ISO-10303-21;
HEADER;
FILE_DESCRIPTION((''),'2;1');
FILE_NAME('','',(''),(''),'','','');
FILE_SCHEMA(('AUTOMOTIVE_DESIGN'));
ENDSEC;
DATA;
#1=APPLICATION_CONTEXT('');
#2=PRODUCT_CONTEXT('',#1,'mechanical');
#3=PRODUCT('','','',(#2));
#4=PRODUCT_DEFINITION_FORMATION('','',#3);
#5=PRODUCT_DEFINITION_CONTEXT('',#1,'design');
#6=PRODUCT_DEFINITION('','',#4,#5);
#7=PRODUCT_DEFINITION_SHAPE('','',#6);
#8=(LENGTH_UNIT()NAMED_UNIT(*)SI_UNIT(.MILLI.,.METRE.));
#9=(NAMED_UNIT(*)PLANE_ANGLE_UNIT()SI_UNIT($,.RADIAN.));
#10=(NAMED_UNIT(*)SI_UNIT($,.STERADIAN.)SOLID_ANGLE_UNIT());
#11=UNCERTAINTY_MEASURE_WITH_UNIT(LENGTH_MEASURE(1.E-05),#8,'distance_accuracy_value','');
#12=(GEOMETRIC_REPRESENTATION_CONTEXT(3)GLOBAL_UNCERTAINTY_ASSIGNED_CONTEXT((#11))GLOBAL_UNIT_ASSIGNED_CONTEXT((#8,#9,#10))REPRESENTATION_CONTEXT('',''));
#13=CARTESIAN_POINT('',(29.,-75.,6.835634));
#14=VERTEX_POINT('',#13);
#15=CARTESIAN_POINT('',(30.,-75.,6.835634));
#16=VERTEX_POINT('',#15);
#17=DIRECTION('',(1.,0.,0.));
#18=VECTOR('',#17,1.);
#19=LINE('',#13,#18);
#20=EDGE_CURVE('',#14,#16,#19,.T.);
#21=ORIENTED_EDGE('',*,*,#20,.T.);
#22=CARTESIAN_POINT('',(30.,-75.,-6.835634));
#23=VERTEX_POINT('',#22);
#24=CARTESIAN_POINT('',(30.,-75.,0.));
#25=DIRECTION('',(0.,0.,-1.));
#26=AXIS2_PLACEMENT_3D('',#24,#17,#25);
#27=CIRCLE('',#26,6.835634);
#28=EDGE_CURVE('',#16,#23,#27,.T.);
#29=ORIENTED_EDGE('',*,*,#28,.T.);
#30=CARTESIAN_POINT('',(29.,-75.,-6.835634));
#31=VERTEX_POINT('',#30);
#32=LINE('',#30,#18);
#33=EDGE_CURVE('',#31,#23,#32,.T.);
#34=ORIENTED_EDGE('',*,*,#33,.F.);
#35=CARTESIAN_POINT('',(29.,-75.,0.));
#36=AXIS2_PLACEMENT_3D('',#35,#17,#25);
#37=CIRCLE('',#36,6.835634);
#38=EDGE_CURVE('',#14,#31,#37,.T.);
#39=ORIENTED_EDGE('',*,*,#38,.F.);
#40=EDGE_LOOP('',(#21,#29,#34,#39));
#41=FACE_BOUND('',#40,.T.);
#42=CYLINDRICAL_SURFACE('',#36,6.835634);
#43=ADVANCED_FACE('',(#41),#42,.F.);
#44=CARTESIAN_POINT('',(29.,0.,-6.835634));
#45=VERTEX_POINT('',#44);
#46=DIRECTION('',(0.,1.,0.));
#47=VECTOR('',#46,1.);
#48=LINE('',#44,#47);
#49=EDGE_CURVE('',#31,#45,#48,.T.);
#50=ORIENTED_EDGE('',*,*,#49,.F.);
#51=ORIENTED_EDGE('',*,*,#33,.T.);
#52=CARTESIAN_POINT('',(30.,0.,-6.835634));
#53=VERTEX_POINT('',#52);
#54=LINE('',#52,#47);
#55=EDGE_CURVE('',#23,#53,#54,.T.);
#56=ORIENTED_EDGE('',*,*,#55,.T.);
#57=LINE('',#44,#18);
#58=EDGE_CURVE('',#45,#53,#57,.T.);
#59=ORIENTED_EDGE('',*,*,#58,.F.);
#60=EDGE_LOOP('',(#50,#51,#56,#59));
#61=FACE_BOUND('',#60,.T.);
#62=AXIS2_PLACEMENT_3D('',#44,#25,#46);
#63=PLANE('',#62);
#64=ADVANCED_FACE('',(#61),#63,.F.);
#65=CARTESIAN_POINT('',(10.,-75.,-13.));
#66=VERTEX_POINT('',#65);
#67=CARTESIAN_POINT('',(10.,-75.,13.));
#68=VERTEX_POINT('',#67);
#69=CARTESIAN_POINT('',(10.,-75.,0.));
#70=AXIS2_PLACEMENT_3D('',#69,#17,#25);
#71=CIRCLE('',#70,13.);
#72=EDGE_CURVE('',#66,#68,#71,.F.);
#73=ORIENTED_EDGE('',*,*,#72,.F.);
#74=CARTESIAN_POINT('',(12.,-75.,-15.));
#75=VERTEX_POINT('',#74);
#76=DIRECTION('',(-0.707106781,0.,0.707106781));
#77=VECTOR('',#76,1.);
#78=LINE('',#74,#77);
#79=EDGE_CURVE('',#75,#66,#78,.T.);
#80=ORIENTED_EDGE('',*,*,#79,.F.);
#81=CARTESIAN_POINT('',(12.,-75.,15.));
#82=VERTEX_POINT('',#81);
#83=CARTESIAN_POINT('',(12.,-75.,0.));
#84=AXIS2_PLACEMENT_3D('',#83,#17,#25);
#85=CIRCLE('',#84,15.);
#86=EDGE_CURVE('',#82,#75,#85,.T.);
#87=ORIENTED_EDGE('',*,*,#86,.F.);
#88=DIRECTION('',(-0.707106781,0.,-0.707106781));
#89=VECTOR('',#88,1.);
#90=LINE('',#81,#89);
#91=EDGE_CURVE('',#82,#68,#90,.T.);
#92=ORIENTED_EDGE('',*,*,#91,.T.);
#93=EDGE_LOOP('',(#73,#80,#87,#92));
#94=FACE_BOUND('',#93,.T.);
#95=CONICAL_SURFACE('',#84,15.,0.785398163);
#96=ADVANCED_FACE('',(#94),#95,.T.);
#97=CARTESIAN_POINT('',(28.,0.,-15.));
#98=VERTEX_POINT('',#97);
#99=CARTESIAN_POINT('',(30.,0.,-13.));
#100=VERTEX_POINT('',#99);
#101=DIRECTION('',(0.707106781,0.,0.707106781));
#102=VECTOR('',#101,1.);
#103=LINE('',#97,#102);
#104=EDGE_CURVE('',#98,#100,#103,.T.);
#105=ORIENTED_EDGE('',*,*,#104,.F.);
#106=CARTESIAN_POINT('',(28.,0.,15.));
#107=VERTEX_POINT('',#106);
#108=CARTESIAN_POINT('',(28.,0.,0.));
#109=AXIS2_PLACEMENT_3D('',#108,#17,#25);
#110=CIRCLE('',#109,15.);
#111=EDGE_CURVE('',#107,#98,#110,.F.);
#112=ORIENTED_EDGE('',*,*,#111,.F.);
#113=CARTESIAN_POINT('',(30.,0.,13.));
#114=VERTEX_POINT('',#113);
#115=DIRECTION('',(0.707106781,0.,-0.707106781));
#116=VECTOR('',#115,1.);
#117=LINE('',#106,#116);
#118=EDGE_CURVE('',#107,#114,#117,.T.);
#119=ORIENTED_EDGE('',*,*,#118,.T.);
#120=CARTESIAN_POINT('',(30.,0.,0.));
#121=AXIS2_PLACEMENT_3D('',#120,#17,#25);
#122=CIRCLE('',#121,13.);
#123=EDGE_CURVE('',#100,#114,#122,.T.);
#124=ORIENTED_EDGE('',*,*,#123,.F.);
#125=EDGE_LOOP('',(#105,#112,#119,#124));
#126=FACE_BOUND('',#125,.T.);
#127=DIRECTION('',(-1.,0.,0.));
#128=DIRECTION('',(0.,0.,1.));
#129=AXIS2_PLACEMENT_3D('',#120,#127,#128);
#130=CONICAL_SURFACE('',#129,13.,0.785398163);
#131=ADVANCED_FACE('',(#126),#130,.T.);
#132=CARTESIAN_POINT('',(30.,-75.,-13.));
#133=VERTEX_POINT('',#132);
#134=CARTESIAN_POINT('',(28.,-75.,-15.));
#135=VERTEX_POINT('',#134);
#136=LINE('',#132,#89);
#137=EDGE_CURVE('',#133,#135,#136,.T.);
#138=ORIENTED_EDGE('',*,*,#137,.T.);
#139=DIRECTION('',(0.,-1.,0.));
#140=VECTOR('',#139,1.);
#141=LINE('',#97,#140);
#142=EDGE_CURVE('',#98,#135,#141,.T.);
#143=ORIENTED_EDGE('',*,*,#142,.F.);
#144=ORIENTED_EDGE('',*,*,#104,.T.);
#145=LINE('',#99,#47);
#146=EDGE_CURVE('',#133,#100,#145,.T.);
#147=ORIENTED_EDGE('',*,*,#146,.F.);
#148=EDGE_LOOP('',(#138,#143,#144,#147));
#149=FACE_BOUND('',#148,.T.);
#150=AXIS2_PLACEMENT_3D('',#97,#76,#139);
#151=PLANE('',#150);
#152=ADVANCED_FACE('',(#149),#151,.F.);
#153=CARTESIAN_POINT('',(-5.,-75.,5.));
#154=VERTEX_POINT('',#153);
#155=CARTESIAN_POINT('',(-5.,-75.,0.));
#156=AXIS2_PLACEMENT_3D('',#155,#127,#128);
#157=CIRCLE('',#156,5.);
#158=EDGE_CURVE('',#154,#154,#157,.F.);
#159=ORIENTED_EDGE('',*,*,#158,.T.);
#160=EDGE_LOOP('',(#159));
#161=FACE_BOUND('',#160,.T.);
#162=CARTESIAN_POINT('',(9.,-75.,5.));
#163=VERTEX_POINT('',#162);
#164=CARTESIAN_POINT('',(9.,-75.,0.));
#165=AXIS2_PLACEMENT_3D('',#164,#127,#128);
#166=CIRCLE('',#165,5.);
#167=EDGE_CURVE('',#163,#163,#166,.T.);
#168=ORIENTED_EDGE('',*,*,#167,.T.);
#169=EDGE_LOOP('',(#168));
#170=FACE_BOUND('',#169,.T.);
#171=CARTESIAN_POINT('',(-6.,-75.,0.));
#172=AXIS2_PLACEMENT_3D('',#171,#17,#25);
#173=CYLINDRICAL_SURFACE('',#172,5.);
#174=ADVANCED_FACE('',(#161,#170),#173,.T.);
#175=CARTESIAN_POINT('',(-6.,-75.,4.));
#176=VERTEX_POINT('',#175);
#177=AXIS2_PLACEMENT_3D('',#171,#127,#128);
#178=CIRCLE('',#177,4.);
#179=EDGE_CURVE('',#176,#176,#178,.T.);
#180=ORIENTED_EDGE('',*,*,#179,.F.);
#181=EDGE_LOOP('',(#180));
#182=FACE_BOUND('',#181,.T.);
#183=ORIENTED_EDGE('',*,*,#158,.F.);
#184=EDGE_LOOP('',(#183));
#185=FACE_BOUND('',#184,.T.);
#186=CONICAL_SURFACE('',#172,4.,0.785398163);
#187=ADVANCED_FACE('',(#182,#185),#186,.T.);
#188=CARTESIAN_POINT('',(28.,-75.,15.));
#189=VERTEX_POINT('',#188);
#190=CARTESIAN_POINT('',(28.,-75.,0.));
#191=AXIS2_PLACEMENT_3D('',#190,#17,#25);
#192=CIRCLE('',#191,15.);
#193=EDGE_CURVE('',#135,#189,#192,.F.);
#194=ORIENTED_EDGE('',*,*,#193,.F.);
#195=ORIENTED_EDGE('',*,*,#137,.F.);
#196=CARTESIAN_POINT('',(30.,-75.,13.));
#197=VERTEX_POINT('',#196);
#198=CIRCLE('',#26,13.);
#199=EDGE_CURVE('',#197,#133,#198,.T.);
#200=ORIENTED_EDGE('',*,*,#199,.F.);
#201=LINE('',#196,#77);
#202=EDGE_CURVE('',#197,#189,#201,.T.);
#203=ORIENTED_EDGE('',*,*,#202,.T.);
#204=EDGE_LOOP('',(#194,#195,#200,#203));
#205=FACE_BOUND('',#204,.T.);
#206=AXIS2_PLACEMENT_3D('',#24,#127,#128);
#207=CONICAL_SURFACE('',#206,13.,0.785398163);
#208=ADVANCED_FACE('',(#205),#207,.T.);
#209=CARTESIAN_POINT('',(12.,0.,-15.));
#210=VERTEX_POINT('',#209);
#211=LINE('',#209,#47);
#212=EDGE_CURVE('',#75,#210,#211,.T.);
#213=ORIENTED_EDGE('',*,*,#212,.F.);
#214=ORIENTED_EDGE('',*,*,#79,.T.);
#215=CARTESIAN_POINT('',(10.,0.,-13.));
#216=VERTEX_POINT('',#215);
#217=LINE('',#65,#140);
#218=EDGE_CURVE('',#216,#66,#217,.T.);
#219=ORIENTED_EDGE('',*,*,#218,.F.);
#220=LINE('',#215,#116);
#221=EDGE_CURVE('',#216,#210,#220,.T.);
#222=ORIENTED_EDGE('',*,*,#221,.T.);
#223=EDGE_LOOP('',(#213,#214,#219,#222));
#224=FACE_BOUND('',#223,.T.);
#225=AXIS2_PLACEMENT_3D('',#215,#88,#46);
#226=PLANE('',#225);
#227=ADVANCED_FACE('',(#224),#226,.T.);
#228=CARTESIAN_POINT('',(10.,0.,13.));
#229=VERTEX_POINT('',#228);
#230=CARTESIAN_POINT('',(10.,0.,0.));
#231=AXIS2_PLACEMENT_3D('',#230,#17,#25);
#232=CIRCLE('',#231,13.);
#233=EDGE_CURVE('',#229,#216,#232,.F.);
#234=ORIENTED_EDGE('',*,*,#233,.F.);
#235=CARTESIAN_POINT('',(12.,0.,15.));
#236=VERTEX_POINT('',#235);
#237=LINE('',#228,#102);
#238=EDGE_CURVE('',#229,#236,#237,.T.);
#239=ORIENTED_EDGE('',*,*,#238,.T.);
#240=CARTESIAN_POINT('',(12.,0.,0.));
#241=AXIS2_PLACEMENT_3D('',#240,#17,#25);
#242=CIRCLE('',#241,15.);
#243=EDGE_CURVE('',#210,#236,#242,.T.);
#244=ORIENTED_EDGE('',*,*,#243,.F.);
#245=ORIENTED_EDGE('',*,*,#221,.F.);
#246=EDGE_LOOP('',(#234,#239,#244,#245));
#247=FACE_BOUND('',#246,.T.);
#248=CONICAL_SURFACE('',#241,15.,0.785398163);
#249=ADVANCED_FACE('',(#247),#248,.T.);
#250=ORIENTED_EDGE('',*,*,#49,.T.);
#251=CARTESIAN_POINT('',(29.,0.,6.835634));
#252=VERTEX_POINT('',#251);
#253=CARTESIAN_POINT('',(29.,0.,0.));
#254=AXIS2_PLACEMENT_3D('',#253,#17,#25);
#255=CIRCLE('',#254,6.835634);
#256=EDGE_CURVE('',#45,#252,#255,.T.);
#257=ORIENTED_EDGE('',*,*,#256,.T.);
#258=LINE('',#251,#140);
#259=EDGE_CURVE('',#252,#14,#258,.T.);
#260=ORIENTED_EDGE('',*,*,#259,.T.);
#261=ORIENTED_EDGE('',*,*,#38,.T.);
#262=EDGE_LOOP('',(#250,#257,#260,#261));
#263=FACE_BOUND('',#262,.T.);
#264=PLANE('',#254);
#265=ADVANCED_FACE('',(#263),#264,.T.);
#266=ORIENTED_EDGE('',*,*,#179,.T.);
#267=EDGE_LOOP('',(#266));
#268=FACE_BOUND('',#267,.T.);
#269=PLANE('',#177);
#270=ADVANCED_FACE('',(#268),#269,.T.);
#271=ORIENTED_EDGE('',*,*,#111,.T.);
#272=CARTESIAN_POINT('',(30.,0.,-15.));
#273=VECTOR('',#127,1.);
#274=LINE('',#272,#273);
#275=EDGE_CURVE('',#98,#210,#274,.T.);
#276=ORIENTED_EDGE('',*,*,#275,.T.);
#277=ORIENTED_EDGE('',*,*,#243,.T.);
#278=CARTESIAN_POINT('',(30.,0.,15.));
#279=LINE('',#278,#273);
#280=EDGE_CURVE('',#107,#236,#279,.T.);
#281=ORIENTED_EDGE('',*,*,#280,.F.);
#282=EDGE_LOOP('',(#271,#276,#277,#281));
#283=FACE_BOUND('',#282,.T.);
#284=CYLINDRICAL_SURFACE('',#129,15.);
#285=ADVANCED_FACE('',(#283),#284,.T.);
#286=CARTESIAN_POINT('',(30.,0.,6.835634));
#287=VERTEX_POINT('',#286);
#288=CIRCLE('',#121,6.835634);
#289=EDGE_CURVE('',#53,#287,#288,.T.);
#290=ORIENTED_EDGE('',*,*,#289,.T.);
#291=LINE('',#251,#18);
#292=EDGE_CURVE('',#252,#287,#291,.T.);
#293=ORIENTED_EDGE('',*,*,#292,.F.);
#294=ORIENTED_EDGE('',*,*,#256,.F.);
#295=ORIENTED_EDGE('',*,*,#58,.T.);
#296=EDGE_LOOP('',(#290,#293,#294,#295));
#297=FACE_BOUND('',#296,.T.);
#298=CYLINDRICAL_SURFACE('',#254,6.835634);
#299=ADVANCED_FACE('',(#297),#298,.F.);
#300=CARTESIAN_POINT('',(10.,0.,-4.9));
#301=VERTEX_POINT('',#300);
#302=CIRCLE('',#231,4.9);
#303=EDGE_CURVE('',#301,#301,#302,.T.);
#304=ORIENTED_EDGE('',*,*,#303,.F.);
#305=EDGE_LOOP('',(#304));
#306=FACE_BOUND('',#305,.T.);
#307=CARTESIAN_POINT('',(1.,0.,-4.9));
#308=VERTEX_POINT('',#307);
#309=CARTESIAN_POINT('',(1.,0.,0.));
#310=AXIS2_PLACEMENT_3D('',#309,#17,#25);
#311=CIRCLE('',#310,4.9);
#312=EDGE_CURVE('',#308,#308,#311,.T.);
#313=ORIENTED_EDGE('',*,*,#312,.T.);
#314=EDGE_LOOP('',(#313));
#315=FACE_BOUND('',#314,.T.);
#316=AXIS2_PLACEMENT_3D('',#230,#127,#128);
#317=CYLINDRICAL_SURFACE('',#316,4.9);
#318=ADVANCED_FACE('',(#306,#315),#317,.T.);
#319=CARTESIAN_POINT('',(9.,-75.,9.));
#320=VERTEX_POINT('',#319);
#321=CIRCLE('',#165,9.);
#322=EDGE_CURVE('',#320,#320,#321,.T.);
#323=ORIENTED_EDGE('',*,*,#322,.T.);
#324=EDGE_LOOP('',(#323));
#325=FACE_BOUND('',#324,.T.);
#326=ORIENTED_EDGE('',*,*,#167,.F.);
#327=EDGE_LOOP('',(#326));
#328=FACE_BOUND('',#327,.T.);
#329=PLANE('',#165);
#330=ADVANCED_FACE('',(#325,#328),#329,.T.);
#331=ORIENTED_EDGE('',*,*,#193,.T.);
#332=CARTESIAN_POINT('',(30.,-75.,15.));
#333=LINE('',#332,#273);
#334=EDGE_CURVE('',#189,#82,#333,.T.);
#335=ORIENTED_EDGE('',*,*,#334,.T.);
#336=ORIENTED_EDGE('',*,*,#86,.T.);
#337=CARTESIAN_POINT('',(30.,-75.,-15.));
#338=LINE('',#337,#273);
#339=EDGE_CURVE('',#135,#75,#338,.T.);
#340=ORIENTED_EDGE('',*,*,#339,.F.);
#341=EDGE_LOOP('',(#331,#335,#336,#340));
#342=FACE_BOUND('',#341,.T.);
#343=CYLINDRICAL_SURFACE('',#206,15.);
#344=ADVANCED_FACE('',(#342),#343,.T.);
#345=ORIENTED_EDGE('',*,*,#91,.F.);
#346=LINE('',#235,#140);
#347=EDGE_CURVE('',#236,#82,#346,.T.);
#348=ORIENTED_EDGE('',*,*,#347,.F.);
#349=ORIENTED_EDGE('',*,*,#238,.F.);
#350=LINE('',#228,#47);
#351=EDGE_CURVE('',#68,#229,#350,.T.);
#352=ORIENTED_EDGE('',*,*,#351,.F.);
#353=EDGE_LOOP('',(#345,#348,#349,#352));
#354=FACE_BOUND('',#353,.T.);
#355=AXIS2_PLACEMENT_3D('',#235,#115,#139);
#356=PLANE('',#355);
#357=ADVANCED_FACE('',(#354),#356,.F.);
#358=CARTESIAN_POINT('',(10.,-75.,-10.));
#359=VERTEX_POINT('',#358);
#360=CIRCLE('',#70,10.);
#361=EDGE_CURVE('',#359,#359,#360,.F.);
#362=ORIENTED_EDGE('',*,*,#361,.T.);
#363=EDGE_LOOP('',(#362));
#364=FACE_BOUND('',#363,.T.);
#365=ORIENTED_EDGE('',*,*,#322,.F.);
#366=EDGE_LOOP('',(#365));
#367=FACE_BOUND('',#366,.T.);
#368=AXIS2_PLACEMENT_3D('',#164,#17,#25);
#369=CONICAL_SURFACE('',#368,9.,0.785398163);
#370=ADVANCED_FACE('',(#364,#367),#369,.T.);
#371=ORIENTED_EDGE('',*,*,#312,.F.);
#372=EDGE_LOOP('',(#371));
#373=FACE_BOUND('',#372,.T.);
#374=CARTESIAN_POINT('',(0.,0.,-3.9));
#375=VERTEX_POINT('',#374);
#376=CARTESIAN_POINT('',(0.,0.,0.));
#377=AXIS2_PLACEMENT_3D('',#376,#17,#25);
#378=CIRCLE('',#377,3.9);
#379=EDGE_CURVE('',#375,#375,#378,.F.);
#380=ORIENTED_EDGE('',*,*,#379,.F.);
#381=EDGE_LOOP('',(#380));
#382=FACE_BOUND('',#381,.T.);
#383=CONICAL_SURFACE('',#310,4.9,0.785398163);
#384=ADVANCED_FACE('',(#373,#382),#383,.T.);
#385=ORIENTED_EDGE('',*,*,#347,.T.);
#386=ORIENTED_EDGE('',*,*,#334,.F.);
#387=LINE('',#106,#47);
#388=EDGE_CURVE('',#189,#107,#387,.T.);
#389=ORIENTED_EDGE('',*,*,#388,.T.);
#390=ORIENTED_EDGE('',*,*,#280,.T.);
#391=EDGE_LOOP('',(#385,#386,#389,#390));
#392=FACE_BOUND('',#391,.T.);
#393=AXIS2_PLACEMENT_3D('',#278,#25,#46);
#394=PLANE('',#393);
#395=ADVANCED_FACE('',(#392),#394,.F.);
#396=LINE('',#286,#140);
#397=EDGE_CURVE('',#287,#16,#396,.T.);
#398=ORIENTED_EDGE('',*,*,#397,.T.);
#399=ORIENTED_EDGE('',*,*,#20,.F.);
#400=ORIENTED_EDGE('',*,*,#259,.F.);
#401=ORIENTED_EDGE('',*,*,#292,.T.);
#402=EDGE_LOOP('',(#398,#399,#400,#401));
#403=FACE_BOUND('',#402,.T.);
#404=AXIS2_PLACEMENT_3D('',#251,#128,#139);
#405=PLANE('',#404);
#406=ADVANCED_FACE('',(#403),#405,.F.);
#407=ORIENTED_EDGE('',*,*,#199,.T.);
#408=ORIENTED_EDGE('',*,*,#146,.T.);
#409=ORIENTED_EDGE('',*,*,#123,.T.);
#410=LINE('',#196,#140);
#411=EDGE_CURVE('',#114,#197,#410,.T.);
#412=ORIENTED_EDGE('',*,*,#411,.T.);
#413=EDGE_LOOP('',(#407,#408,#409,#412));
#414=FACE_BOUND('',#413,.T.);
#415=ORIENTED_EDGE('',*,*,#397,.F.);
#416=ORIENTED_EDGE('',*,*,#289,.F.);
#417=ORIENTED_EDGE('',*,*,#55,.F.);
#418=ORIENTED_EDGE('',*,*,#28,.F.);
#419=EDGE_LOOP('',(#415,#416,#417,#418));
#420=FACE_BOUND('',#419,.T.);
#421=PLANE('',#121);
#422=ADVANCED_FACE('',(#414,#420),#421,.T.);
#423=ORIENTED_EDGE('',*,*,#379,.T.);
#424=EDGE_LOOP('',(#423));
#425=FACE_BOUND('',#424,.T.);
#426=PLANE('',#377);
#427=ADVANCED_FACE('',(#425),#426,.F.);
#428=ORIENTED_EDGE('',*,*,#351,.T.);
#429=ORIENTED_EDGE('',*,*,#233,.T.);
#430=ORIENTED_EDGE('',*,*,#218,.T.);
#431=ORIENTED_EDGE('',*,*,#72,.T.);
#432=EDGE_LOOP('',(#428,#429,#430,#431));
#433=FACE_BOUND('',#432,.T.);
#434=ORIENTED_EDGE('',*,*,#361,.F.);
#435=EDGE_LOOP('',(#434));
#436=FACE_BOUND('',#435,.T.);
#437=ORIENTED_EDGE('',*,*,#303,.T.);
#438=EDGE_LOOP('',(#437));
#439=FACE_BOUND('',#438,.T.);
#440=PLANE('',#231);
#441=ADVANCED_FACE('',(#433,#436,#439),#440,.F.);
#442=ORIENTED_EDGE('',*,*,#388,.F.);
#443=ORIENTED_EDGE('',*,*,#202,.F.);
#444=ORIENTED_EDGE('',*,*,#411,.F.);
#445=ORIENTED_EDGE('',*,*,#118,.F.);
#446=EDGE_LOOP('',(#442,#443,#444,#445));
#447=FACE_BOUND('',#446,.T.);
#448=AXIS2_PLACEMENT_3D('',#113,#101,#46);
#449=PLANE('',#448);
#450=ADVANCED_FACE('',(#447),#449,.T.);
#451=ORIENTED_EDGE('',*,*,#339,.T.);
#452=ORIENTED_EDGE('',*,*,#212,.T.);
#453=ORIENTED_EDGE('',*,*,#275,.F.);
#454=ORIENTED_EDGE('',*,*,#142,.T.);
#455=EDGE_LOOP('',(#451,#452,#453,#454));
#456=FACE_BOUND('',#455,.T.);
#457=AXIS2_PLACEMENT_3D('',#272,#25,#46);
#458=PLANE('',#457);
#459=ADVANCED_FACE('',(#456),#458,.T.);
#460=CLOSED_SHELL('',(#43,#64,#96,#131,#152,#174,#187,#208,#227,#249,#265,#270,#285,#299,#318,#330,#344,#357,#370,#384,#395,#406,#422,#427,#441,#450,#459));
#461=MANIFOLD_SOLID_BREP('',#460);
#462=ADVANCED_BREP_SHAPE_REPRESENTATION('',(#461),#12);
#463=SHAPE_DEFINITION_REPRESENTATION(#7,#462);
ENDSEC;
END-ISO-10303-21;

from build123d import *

# Parameters (mm, degrees)
SKETCH_1_R          = 4.9
EXTRUDE_1_DEPTH     = 10
EXTRUDE_2_DEPTH     = 20
SKETCH_3_R          = 5
EXTRUDE_3_DEPTH     = 16
CHAMFER_1_SIZE      = 2
CUT_EXTRUDE_1_DEPTH = 1
SKETCH_5_R          = 10
EXTRUDE_4_DEPTH     = 1
CHAMFER_2_SIZE      = 1
CHAMFER_3_SIZE      = 1


with BuildPart() as part:
    # 草图1 → 凸台-拉伸1 (new body)
    with BuildSketch(Plane(origin=(0, 0, 0), x_dir=(0, 0, -1), z_dir=(1, 0, 0))):
        Circle(SKETCH_1_R)
    extrude(amount=EXTRUDE_1_DEPTH)

    # 草图2 → 凸台-拉伸2 (add)
    with BuildSketch(Plane(origin=(10, 0, 0), x_dir=(0, 0, -1), z_dir=(1, 0, 0))):
        with BuildLine():
            Line((15, 0), (15, -75))
            ThreePointArc((15, -75), (0, -90), (-15, -75))
            Line((-15, -75), (-15, 0))
            ThreePointArc((-15, 0), (0, 15), (15, 0))
        make_face()
    extrude(amount=EXTRUDE_2_DEPTH)

    # 草图3 → 凸台-拉伸3 (add)
    with BuildSketch(Plane.ZY.offset(-10)):
        with Locations(Location((0, -75, 0), (0, 0, 180))):
            Circle(SKETCH_3_R)
    extrude(amount=EXTRUDE_3_DEPTH)

    # 倒角1
    chamfer_1_edges = [part.edges().sort_by_distance(p)[0] for p in [
        (10, -37.5, 15),
        (10, -90, 0),
        (30, -37.5, -15),
        (10, 15, 0),
        (30, -37.5, 15),
        (30, -90, 0),
        (30, 15, 0),
        (10, -37.5, -15),
    ]]
    chamfer(chamfer_1_edges, length=CHAMFER_1_SIZE)

    # 草图4 → 切除-拉伸1 (cut)
    with BuildSketch(Plane(origin=(30, 0, 0), x_dir=(0, 0, -1), z_dir=(1, 0, 0))):
        with BuildLine():
            Line((6.835634275, 0), (6.835634275, -75))
            ThreePointArc((6.835634275, -75), (0, -81.835634275), (-6.835634275, -75))
            Line((-6.835634275, -75), (-6.835634275, 0))
            ThreePointArc((-6.835634275, 0), (0, 6.835634275), (6.835634275, 0))
        make_face()
    extrude(amount=-CUT_EXTRUDE_1_DEPTH, mode=Mode.SUBTRACT)

    # 草图5 → 凸台-拉伸4 (add)
    with BuildSketch(Plane.ZY.offset(-10)):
        with Locations(Location((0, -75, 0), (0, 0, 180))):
            Circle(SKETCH_5_R)
    extrude(amount=EXTRUDE_4_DEPTH)

    # 倒角2
    chamfer_2_edges = [part.edges().sort_by_distance(p)[0] for p in [
        (9, -75, 10),
    ]]
    chamfer(chamfer_2_edges, length=CHAMFER_2_SIZE - 0.0001)  # a hair under: the kernel refuses the full size

    # 倒角3
    chamfer_3_edges = [part.edges().sort_by_distance(p)[0] for p in [
        (-6, -75, 5),
        (0, 0, 4.9),
    ]]
    chamfer(chamfer_3_edges, length=CHAMFER_3_SIZE)


solid = part.part
